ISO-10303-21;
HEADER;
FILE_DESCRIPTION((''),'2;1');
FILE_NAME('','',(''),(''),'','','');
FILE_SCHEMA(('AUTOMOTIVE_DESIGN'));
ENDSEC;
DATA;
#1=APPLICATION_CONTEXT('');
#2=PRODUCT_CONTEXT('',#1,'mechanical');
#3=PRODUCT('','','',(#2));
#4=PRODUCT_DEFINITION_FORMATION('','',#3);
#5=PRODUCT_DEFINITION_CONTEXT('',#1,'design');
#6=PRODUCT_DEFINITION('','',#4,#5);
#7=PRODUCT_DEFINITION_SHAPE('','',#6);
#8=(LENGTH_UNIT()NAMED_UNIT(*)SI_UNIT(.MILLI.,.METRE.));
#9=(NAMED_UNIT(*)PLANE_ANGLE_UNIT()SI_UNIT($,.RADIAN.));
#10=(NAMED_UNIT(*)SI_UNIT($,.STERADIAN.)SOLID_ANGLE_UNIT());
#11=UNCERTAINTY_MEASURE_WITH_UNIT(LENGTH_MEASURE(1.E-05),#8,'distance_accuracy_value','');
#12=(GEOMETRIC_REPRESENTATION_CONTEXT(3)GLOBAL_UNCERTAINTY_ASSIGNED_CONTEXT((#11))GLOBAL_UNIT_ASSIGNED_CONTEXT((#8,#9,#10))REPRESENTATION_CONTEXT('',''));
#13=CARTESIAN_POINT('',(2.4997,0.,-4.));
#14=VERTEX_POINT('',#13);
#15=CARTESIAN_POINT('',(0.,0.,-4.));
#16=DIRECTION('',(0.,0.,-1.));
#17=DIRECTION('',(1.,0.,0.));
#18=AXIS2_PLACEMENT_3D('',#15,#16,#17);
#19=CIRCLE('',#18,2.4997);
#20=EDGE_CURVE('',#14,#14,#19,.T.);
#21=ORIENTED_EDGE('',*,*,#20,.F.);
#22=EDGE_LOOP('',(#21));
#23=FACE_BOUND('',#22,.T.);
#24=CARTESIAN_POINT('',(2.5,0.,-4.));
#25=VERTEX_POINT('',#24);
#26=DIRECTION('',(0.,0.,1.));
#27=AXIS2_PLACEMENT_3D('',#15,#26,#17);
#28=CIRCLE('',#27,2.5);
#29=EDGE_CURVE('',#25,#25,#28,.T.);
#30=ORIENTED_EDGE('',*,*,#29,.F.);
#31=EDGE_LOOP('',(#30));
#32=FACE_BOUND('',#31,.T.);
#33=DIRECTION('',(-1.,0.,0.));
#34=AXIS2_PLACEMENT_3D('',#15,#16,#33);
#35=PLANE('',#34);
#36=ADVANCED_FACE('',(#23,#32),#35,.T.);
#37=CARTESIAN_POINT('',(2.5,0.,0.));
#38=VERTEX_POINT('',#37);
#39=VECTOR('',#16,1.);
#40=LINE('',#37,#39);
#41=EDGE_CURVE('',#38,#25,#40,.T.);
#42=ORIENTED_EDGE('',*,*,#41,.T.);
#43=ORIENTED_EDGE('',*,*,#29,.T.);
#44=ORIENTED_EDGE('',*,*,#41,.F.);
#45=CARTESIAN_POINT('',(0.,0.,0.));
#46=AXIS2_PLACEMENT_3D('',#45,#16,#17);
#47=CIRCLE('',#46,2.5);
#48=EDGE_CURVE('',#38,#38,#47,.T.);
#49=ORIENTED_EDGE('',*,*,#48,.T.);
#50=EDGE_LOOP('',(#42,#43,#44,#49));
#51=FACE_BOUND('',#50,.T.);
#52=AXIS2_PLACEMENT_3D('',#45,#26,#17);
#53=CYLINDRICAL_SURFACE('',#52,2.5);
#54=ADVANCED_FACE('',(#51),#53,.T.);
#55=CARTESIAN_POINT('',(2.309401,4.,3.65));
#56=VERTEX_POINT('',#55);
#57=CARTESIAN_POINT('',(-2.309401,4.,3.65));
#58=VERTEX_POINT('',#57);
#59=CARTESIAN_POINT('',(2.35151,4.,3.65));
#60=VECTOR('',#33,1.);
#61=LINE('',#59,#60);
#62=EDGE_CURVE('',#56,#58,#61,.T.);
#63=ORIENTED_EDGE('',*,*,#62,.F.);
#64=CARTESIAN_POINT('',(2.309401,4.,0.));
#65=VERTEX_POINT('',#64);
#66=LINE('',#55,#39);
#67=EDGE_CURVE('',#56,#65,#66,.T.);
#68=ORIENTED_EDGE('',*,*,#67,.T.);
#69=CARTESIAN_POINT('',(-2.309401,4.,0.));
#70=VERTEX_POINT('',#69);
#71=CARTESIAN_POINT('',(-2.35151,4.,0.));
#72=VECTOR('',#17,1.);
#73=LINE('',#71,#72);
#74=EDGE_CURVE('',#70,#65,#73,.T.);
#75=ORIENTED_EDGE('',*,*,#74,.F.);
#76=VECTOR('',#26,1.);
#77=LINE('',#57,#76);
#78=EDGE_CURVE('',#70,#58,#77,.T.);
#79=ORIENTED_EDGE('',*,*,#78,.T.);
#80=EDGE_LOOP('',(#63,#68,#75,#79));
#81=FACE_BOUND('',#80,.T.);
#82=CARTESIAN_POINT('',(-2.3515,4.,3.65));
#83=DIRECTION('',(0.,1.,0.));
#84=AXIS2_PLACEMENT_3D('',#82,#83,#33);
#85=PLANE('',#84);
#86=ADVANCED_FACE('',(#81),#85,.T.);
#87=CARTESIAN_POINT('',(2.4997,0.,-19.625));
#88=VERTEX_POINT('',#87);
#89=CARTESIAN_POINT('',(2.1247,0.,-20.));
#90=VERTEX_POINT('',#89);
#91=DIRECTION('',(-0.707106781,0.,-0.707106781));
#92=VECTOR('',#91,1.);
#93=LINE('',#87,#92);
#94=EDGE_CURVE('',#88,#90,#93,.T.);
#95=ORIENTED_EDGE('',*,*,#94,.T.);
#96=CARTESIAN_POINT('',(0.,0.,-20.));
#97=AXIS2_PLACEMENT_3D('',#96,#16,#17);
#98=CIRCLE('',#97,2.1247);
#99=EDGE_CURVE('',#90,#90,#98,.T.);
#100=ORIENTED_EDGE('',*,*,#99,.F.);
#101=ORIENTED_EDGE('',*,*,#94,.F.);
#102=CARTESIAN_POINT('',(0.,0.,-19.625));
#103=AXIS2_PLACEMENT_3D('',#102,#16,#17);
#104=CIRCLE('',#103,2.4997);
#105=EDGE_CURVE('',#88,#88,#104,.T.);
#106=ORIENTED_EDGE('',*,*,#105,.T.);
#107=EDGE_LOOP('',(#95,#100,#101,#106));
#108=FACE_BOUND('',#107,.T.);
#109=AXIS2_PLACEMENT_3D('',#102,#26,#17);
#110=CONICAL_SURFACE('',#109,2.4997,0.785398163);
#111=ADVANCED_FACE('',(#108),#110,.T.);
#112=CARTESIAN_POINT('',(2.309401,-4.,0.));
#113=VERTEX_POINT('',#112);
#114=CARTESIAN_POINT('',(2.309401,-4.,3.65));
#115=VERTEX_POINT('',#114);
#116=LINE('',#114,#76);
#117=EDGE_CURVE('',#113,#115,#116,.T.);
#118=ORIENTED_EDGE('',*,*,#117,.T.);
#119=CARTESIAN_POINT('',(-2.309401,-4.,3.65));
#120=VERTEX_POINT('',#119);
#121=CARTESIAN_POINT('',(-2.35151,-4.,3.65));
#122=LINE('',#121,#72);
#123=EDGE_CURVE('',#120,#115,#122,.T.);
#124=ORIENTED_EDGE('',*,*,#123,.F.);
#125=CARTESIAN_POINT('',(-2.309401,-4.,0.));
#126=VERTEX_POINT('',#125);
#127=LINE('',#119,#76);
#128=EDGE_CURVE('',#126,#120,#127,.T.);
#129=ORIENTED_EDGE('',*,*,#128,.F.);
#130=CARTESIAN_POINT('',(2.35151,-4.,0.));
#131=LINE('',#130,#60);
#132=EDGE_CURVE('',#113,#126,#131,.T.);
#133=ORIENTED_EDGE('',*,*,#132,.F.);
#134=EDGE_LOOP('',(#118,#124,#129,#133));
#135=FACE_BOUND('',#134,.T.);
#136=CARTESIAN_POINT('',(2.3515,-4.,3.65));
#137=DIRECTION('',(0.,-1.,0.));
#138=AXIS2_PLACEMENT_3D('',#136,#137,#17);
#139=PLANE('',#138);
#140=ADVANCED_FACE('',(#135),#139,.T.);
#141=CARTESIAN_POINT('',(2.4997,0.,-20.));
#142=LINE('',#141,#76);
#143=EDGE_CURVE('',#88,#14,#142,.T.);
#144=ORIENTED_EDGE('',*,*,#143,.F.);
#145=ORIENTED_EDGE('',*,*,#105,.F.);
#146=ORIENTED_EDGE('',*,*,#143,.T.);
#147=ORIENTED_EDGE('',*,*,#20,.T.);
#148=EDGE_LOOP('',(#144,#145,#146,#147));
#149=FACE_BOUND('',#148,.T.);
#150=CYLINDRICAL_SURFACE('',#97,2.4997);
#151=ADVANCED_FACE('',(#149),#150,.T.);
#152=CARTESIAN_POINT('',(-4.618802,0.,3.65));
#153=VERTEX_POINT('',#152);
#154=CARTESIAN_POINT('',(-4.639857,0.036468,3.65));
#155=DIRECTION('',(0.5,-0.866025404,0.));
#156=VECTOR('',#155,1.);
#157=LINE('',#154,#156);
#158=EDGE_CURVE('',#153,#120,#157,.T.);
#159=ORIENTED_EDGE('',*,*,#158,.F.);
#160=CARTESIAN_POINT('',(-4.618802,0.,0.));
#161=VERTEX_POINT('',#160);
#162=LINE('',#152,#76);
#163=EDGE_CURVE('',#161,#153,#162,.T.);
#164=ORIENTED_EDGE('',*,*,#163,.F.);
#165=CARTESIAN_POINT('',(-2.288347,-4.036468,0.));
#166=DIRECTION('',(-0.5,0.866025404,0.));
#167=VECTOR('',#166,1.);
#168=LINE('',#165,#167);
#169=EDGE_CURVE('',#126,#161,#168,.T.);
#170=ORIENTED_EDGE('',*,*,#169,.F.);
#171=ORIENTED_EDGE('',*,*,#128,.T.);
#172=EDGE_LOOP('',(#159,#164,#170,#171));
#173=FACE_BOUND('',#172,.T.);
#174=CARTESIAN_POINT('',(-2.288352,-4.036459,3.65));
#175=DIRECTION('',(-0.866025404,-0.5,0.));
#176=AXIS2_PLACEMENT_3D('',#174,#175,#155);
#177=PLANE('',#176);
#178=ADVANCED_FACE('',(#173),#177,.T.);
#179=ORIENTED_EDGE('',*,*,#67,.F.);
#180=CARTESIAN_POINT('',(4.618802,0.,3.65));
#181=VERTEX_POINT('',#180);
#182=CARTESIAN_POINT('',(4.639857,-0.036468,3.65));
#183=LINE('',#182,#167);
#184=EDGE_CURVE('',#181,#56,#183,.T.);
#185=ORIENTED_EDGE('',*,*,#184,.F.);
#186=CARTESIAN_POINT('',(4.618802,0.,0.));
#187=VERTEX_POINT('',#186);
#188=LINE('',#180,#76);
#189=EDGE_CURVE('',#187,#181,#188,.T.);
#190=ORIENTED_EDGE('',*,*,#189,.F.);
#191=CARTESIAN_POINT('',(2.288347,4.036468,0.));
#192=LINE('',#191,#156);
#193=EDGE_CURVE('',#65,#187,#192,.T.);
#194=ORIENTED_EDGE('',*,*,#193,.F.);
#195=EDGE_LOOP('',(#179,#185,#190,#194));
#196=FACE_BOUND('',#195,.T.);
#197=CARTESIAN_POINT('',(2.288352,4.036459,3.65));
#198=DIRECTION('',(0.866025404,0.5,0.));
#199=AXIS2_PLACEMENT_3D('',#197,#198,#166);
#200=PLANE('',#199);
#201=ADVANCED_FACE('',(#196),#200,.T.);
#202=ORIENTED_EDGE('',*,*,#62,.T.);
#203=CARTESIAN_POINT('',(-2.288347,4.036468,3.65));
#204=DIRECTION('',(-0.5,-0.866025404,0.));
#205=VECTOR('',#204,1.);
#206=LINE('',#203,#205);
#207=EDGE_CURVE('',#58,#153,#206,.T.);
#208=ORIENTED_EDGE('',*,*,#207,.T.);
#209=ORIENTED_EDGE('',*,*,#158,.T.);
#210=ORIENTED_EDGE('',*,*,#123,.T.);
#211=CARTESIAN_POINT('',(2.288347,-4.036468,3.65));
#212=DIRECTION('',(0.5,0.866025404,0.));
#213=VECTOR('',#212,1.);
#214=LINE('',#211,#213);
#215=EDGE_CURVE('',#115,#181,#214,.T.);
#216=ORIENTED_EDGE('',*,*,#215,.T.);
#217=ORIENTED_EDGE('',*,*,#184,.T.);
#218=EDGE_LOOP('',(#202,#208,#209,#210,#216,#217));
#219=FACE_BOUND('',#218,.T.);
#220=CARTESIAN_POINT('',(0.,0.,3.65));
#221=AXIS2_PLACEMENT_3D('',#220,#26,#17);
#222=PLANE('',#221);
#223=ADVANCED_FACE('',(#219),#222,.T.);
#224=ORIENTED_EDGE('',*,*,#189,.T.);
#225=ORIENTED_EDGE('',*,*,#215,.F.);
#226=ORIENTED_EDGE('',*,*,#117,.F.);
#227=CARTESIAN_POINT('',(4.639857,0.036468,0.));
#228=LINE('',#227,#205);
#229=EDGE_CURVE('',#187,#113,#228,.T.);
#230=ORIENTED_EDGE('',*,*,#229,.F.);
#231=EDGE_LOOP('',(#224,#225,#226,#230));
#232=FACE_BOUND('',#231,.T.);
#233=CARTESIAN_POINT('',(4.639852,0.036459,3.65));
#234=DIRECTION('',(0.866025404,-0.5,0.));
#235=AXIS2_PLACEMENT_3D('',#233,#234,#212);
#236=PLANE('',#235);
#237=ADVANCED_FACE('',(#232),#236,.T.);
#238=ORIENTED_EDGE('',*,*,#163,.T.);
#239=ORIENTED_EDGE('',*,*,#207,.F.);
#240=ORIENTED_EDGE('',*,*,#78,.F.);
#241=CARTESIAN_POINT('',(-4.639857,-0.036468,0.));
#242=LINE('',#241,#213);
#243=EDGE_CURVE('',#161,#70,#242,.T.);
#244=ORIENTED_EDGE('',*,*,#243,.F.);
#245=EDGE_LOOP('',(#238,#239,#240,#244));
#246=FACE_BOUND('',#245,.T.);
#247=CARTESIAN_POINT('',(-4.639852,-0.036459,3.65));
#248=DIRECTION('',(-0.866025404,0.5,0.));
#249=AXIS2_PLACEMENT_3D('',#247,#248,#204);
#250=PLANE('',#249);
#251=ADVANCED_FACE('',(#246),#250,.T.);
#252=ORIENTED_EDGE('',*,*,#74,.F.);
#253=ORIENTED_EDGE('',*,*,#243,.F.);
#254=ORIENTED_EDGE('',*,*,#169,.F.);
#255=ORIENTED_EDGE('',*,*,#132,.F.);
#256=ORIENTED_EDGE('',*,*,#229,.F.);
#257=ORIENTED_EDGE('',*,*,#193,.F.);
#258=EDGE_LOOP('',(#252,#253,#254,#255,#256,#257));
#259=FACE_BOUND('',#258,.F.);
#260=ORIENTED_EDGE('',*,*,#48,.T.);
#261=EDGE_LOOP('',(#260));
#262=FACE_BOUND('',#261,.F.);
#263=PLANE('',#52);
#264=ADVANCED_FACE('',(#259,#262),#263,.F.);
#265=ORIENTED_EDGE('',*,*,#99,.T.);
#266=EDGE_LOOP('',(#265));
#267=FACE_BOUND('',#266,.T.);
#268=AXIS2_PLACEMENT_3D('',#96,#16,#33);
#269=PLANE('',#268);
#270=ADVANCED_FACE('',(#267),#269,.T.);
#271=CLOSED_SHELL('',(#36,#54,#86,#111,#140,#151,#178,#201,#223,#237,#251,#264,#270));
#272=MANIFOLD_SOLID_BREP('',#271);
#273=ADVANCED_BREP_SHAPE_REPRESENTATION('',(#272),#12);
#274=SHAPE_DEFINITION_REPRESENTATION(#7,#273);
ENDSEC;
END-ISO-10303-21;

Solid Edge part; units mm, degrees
sketch "Sketch1" plane through (0, 0, 0) normal (0, 0, 1) x (1, 0, 0)
  circle A0 centre (0, 0) radius 4.64
  dimension "D1" = 9.28
extrude "Protrusion1" add sketch "Sketch1" along normal blind 3.65
sketch "Sketch2" plane through (0, 0, 0) normal (0, 0, -1) x (1, 0, 0)
  circle A0 centre (0, 0) radius 2.5
extrude "Protrusion2" add sketch "Sketch2" along normal blind 20
sketch "Sketch3" plane through (0, 0, -20) normal (0, 0, -1) x (1, 0, 0)
  circle A0 centre (0, 0) radius 2.4997
extrude "Cutout1" cut sketch "Sketch3" against normal blind 16 flip side to cut
chamfer "Chamfer_1" distance 0.375 angle 45 1 edges at (-2.4997, 0, -20)
sketch "Sketch4" plane through (0, 0, 3.65) normal (0, 0, 1) x (1, 0, 0)
  line L0 (-2.3515, 4) -> (2.3515, 4)
  dimension "D1" = 8
extrude "Cutout2" cut sketch "Sketch4" against normal up to next material side at (0, 4.05, 3.65)
pattern_circular "Pattern1" count 6 over 360 about axis through (0, 0, 3.65) along (0, 0, 1) of "Cutout2"
properties part number "24101190"
